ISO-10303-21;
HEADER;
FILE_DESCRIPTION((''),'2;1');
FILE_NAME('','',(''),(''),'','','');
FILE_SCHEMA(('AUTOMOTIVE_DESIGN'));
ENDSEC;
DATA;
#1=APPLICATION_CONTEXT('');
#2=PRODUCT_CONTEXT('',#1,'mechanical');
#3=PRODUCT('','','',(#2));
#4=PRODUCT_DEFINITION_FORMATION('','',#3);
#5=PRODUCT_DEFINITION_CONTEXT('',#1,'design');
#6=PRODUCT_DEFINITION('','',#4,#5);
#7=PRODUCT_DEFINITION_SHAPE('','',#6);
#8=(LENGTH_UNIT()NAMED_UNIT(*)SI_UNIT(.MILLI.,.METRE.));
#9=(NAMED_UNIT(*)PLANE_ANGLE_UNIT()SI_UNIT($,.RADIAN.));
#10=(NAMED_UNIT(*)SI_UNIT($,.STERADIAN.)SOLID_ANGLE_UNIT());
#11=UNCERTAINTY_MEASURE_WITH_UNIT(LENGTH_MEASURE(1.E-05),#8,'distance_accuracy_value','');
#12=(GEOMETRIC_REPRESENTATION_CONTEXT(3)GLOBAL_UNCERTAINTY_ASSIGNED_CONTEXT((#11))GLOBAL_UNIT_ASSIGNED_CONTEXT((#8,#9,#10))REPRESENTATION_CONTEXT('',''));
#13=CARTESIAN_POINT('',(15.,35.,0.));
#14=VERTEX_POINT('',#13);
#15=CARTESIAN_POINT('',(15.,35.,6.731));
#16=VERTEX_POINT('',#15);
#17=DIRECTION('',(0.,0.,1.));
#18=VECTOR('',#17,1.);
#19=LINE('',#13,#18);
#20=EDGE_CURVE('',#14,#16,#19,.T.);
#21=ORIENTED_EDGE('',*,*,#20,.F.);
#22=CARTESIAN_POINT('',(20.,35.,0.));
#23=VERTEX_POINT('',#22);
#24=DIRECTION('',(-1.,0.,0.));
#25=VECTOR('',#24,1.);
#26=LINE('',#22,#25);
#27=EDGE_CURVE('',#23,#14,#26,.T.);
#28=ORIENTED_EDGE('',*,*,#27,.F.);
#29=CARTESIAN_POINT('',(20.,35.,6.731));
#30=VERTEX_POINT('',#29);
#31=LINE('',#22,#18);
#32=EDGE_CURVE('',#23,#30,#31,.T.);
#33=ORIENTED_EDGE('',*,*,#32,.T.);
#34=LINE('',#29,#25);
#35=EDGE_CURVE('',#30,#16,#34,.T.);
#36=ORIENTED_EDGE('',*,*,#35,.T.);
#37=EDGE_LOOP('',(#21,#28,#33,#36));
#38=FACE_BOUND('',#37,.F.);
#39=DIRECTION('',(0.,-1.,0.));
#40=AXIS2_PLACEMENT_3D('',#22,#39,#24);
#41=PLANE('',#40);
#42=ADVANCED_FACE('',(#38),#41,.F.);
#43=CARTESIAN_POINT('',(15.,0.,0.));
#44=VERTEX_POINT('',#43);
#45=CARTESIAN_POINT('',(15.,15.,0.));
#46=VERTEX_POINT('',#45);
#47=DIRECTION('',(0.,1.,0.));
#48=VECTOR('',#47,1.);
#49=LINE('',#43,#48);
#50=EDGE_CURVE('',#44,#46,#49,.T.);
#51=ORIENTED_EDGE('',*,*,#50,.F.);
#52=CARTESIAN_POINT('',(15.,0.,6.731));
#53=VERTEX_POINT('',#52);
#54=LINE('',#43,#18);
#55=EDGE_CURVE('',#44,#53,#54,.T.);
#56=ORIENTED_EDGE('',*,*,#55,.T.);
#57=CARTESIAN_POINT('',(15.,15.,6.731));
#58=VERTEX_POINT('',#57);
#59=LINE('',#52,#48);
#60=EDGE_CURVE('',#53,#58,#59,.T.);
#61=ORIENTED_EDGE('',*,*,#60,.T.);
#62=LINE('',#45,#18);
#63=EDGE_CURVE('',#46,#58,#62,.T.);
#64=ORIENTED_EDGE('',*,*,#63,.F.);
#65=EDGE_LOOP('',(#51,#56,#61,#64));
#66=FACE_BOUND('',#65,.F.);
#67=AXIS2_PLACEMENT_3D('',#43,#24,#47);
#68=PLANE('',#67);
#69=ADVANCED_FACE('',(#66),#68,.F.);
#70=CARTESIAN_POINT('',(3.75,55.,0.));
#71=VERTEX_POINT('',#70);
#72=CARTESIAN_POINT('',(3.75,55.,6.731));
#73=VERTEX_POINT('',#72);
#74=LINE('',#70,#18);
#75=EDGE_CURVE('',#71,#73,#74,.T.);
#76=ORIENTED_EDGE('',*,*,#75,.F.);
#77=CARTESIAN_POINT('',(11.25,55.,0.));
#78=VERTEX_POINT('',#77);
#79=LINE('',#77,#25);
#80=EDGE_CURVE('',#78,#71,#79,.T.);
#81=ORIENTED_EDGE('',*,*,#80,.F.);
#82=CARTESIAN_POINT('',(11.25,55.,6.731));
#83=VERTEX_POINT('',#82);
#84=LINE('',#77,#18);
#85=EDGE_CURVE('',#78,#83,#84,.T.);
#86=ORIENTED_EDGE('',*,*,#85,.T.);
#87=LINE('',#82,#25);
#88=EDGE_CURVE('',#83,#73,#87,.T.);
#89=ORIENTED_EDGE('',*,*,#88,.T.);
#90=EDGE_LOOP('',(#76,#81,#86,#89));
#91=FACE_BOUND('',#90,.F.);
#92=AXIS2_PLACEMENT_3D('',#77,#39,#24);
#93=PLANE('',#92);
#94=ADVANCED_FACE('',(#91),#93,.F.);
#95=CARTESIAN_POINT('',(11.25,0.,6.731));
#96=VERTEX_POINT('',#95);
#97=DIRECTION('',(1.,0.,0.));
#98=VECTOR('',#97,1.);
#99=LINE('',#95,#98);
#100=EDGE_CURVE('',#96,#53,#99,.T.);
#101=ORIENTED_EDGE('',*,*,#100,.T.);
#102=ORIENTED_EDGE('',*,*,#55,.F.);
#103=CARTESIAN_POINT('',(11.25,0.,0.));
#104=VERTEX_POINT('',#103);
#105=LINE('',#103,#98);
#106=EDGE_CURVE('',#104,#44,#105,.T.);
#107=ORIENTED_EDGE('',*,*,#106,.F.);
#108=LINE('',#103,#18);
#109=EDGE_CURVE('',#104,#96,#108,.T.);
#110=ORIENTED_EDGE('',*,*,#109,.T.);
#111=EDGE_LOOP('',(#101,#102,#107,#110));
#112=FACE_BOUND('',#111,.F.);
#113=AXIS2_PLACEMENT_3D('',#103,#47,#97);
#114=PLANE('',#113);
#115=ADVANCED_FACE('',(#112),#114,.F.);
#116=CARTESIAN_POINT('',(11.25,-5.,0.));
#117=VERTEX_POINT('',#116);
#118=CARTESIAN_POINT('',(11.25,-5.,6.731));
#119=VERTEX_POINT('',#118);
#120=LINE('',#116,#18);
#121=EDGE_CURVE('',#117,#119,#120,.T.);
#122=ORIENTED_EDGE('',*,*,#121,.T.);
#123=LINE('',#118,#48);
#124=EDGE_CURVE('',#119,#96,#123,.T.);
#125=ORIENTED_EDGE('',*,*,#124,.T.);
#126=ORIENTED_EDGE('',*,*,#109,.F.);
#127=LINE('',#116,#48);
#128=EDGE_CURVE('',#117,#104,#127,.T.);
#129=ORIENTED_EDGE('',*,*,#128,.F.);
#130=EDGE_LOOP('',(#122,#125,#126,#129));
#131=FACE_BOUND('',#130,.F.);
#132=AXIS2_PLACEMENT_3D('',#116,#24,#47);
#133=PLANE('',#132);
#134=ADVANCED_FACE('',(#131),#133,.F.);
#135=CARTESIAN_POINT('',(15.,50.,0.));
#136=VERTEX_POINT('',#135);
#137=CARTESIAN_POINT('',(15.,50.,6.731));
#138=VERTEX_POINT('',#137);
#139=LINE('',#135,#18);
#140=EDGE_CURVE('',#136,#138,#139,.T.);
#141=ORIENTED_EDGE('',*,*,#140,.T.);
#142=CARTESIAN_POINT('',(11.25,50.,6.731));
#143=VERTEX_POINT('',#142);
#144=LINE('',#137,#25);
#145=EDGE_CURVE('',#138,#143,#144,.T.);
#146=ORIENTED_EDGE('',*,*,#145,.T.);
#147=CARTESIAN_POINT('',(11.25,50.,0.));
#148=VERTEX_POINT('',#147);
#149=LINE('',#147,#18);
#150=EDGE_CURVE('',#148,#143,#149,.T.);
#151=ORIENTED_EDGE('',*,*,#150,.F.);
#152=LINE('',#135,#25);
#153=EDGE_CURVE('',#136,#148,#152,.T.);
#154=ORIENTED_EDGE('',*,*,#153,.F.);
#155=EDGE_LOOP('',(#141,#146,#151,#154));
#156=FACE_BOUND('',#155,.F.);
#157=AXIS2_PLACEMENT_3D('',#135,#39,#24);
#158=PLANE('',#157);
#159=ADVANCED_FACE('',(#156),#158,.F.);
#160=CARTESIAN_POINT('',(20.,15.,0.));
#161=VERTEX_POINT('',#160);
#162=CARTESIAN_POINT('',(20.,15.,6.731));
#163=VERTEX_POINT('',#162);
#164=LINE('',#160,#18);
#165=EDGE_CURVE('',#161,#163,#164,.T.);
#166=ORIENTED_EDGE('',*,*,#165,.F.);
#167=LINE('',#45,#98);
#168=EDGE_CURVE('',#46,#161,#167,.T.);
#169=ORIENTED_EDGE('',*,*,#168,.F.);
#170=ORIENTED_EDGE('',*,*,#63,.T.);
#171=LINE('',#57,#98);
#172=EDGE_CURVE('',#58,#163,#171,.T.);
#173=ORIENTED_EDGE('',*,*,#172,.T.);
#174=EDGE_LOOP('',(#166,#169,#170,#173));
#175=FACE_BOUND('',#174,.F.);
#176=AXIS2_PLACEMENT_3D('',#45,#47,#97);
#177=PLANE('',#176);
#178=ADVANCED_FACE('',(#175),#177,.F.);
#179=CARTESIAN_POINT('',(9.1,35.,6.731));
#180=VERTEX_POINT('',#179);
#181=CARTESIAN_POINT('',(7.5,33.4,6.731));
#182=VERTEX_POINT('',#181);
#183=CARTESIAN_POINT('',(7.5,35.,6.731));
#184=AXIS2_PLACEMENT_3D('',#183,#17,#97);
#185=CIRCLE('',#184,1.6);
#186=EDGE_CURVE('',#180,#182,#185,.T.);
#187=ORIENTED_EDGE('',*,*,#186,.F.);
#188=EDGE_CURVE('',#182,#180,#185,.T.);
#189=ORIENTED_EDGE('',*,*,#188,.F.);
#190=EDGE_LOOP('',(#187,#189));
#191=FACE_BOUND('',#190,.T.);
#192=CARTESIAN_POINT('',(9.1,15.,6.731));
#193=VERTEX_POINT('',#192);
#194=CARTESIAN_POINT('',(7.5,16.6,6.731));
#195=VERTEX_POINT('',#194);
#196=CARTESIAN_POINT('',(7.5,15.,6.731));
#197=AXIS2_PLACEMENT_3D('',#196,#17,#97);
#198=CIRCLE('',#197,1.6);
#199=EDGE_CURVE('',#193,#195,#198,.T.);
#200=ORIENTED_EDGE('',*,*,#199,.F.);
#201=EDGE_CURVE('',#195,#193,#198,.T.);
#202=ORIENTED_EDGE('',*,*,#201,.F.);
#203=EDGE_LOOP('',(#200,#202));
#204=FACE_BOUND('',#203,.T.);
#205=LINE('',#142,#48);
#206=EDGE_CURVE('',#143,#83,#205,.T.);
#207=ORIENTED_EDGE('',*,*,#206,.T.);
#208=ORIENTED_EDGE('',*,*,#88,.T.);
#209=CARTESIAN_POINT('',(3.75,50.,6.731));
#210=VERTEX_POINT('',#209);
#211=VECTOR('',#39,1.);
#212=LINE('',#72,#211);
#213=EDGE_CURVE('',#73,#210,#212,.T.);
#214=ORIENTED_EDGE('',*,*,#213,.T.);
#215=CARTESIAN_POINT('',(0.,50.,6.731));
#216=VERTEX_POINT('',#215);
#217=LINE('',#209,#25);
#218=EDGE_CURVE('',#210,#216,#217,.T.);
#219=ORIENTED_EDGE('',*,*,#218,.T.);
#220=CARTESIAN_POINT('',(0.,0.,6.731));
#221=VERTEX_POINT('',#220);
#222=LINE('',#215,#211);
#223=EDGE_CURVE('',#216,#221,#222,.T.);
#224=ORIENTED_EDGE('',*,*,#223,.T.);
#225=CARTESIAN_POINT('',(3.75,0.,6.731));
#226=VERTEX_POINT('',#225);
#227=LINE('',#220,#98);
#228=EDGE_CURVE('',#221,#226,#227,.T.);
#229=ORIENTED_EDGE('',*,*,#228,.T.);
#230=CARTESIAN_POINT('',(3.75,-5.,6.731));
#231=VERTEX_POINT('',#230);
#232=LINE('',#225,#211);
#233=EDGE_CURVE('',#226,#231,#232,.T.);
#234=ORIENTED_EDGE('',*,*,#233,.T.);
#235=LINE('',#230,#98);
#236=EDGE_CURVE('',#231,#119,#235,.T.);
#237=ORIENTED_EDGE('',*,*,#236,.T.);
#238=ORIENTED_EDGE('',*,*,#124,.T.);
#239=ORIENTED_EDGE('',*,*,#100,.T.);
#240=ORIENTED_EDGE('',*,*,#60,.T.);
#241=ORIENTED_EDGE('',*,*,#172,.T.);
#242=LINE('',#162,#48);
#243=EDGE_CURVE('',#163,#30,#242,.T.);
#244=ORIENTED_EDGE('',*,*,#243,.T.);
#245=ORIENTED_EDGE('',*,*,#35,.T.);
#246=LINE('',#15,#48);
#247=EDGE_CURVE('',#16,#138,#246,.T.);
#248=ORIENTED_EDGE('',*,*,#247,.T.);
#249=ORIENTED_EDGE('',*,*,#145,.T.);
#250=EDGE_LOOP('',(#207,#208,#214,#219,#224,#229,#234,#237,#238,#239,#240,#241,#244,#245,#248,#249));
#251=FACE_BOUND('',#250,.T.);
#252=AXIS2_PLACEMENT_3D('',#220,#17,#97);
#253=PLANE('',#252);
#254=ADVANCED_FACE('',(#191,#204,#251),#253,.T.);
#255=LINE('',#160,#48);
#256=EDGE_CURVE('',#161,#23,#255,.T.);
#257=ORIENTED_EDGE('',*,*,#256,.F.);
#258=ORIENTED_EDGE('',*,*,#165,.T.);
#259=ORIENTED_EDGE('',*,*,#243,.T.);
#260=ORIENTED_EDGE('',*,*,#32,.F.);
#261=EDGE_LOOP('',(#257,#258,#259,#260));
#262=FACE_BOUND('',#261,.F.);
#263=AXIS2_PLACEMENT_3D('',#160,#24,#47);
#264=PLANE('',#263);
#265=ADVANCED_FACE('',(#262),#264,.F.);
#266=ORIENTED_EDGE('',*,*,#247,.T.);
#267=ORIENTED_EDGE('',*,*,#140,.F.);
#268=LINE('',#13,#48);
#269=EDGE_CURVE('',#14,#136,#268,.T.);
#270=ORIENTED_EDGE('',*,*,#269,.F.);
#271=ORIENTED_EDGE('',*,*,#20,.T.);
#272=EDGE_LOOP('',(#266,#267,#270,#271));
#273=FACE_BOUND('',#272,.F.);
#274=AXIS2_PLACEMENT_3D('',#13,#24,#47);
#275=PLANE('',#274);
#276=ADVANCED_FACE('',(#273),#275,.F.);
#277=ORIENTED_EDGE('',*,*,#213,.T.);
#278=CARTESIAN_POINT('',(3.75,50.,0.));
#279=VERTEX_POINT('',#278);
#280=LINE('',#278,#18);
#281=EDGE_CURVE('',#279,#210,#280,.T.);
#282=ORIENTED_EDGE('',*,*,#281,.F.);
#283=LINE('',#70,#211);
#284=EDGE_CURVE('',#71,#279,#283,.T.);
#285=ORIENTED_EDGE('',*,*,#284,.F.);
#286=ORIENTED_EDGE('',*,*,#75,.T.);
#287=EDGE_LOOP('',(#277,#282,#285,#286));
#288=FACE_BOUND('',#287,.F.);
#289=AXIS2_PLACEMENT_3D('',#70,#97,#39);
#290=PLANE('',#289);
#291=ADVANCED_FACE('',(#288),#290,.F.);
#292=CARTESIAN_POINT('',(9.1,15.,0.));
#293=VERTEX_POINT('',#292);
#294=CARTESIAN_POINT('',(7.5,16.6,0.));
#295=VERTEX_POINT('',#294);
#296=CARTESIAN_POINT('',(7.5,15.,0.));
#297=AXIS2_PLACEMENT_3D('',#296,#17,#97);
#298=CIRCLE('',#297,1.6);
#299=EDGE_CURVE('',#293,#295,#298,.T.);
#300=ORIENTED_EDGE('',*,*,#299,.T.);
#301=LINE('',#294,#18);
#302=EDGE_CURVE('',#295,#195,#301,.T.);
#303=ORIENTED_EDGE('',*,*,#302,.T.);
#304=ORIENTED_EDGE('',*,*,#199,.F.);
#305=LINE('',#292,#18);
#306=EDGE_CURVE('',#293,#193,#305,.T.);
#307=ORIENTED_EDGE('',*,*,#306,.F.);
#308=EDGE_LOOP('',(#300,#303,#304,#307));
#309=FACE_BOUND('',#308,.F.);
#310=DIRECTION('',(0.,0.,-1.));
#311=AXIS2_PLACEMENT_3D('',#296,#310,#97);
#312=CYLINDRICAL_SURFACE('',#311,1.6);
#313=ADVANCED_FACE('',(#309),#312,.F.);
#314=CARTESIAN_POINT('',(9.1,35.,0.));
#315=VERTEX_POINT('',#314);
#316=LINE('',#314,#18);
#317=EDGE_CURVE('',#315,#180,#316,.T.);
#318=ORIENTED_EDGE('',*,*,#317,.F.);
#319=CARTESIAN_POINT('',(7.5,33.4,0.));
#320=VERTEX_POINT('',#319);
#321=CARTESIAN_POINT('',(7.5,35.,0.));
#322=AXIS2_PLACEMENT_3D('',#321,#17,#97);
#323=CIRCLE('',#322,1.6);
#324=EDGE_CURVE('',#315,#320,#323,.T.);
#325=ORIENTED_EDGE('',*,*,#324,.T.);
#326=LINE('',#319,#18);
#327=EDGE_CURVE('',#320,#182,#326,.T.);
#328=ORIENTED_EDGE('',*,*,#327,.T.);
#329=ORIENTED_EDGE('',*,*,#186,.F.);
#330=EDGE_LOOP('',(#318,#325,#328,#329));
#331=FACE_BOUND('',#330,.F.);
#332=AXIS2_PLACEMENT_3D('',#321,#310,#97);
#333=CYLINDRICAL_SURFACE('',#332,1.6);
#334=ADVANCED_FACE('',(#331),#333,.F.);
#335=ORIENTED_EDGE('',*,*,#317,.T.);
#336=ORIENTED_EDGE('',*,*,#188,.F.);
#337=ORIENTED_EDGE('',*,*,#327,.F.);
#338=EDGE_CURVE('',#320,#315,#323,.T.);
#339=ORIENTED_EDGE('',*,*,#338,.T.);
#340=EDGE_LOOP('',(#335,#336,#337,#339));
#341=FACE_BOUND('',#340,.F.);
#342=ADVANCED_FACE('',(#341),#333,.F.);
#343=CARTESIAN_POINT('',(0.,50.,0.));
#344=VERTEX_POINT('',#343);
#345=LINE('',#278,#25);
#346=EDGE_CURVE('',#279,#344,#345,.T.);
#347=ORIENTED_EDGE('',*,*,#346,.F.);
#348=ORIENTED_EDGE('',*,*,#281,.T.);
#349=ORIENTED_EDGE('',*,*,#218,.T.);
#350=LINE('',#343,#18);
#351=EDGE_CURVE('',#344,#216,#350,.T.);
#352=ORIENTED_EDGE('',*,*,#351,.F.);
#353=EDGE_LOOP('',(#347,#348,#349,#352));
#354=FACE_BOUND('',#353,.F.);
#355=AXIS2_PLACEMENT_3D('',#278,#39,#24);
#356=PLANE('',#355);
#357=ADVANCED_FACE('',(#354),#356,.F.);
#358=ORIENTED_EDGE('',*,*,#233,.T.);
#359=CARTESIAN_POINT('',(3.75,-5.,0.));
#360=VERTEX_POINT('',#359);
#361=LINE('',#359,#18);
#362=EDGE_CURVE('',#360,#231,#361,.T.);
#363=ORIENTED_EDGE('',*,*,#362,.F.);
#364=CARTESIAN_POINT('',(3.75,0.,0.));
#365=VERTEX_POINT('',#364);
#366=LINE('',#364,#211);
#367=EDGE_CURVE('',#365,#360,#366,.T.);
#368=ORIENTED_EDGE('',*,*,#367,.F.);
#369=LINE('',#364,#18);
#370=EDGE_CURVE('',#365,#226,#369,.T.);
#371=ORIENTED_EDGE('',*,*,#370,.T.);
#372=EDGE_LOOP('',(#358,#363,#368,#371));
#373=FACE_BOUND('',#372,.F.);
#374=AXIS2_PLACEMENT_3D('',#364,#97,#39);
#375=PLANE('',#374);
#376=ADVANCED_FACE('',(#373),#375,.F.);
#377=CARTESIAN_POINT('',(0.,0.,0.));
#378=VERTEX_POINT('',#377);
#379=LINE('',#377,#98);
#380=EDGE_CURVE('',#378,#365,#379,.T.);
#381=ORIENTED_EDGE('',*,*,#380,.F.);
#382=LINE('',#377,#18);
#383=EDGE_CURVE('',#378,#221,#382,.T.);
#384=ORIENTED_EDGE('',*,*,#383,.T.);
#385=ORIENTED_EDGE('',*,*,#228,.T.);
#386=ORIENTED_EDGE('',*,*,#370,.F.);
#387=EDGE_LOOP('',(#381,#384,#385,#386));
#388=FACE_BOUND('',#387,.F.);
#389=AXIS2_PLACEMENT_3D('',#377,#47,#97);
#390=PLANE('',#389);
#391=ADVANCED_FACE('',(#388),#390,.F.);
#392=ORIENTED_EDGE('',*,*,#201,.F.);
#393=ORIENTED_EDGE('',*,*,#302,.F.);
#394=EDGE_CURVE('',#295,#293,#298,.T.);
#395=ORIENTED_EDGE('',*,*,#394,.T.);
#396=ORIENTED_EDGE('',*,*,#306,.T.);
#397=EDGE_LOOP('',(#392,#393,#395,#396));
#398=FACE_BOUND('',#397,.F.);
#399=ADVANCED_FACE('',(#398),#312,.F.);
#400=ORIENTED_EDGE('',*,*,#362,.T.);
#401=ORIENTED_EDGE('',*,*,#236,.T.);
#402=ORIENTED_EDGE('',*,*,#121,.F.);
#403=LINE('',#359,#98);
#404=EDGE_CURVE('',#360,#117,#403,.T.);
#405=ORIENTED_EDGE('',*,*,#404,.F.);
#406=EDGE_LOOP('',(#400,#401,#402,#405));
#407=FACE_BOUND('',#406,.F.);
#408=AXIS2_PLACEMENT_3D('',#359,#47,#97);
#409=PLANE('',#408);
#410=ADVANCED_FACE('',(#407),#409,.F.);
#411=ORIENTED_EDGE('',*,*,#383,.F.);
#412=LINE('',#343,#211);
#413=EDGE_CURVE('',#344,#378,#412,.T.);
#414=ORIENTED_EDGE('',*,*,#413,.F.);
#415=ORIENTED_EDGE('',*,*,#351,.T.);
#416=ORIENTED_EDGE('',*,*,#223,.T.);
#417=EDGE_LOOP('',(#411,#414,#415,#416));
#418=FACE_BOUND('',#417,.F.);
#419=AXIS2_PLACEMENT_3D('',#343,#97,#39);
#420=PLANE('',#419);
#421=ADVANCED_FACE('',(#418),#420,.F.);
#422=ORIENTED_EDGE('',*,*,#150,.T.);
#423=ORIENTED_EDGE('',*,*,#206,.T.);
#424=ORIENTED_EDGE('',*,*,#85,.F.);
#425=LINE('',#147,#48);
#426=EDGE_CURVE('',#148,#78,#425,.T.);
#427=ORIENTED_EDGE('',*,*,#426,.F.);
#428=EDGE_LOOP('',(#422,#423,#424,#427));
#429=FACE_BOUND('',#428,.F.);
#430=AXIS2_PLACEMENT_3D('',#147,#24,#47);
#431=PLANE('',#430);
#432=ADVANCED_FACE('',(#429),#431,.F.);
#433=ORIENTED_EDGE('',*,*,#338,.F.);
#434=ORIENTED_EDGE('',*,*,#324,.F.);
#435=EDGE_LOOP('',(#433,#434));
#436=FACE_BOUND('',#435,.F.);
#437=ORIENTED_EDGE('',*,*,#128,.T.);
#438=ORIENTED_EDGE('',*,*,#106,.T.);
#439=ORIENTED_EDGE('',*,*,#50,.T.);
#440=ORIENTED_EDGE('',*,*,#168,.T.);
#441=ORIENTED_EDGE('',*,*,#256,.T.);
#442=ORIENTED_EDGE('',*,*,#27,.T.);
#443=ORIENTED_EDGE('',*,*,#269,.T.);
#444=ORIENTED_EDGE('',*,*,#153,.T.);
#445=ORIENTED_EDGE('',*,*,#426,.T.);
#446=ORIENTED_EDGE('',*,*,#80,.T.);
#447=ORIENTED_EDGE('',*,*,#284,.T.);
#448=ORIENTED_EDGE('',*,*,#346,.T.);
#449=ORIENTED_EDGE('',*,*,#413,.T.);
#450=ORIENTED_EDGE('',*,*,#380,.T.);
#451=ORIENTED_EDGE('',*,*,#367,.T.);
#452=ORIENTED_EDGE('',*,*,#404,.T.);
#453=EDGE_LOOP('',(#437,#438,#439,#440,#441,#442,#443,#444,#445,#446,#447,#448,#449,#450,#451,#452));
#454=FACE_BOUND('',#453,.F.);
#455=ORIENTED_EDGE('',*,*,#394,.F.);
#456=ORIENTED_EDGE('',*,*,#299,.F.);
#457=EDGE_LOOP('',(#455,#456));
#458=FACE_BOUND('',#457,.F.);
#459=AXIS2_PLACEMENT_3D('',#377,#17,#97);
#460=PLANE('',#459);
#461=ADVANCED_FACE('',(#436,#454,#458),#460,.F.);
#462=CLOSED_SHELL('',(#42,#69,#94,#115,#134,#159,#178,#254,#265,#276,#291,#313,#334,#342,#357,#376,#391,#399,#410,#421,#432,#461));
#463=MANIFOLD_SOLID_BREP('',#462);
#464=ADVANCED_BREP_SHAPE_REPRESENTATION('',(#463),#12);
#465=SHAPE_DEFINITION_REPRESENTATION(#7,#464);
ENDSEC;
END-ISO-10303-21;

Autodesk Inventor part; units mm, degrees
ref_plane "YZ Plane" through (0, 0, 0) normal (1, 0, 0) x (0, 1, 0)
ref_plane "XZ Plane" through (0, 0, 0) normal (0, 1, 0) x (-1, 0, 0)
ref_plane "XY Plane" through (0, 0, 0) normal (0, 0, 1) x (1, 0, 0)
sketch "Sketch1" plane through (0, 0, 0) normal (0, 0, 1) x (1, 0, 0)
  line L0 (0, 0) -> (3.75, 0)
  line L1 (3.75, 0) -> (3.75, -5)
  line L2 (3.75, -5) -> (11.25, -5)
  line L3 (11.25, -5) -> (11.25, 0)
  line L4 (11.25, 0) -> (15, 0)
  line L5 (15, 0) -> (15, 15)
  line L6 (15, 15) -> (20, 15)
  line L7 (20, 15) -> (20, 35)
  line L8 (20, 35) -> (15, 35)
  line L9 (15, 35) -> (15, 50)
  line L10 (15, 50) -> (11.25, 50)
  line L11 (11.25, 50) -> (11.25, 55)
  line L12 (11.25, 55) -> (3.75, 55)
  line L13 (3.75, 55) -> (3.75, 50)
  line L14 (3.75, 50) -> (0, 50)
  line L15 (0, 50) -> (0, 0)
  circle A0 centre (7.5, 35) radius 1.6
  circle A1 centre (7.5, 15) radius 1.6
  line L16 (7.5, 15) -> (7.5, 35)
  point P0 (20, 25)
  point P1 (0, 25)
  point P2 (7.5, -5)
  point P3 (7.5, 25)
  dimension "d0" = 5
  dimension "d1" = 50
  dimension "d2" = 20
  dimension "d3" = 7.5
  dimension "d4" = 15
  dimension "d5" = 3.2
  dimension "d6" = 20
extrude "Extrusion1" add sketch "Sketch1" along normal blind 6.731
equation "\"d7\" = THICKB"
equation "\"THICKA\" = 3.175"
equation "\"THICKB\" = 6.731"
equation "\"THICKC\" = 12.7"
equation "\"BALLDIA\" = 12"
equation "\"MAGDIA\" = 9.5"
equation "\"THICKPLY\" = 5"
properties part number "Frame_Lower_Vertical_Plate_B"
